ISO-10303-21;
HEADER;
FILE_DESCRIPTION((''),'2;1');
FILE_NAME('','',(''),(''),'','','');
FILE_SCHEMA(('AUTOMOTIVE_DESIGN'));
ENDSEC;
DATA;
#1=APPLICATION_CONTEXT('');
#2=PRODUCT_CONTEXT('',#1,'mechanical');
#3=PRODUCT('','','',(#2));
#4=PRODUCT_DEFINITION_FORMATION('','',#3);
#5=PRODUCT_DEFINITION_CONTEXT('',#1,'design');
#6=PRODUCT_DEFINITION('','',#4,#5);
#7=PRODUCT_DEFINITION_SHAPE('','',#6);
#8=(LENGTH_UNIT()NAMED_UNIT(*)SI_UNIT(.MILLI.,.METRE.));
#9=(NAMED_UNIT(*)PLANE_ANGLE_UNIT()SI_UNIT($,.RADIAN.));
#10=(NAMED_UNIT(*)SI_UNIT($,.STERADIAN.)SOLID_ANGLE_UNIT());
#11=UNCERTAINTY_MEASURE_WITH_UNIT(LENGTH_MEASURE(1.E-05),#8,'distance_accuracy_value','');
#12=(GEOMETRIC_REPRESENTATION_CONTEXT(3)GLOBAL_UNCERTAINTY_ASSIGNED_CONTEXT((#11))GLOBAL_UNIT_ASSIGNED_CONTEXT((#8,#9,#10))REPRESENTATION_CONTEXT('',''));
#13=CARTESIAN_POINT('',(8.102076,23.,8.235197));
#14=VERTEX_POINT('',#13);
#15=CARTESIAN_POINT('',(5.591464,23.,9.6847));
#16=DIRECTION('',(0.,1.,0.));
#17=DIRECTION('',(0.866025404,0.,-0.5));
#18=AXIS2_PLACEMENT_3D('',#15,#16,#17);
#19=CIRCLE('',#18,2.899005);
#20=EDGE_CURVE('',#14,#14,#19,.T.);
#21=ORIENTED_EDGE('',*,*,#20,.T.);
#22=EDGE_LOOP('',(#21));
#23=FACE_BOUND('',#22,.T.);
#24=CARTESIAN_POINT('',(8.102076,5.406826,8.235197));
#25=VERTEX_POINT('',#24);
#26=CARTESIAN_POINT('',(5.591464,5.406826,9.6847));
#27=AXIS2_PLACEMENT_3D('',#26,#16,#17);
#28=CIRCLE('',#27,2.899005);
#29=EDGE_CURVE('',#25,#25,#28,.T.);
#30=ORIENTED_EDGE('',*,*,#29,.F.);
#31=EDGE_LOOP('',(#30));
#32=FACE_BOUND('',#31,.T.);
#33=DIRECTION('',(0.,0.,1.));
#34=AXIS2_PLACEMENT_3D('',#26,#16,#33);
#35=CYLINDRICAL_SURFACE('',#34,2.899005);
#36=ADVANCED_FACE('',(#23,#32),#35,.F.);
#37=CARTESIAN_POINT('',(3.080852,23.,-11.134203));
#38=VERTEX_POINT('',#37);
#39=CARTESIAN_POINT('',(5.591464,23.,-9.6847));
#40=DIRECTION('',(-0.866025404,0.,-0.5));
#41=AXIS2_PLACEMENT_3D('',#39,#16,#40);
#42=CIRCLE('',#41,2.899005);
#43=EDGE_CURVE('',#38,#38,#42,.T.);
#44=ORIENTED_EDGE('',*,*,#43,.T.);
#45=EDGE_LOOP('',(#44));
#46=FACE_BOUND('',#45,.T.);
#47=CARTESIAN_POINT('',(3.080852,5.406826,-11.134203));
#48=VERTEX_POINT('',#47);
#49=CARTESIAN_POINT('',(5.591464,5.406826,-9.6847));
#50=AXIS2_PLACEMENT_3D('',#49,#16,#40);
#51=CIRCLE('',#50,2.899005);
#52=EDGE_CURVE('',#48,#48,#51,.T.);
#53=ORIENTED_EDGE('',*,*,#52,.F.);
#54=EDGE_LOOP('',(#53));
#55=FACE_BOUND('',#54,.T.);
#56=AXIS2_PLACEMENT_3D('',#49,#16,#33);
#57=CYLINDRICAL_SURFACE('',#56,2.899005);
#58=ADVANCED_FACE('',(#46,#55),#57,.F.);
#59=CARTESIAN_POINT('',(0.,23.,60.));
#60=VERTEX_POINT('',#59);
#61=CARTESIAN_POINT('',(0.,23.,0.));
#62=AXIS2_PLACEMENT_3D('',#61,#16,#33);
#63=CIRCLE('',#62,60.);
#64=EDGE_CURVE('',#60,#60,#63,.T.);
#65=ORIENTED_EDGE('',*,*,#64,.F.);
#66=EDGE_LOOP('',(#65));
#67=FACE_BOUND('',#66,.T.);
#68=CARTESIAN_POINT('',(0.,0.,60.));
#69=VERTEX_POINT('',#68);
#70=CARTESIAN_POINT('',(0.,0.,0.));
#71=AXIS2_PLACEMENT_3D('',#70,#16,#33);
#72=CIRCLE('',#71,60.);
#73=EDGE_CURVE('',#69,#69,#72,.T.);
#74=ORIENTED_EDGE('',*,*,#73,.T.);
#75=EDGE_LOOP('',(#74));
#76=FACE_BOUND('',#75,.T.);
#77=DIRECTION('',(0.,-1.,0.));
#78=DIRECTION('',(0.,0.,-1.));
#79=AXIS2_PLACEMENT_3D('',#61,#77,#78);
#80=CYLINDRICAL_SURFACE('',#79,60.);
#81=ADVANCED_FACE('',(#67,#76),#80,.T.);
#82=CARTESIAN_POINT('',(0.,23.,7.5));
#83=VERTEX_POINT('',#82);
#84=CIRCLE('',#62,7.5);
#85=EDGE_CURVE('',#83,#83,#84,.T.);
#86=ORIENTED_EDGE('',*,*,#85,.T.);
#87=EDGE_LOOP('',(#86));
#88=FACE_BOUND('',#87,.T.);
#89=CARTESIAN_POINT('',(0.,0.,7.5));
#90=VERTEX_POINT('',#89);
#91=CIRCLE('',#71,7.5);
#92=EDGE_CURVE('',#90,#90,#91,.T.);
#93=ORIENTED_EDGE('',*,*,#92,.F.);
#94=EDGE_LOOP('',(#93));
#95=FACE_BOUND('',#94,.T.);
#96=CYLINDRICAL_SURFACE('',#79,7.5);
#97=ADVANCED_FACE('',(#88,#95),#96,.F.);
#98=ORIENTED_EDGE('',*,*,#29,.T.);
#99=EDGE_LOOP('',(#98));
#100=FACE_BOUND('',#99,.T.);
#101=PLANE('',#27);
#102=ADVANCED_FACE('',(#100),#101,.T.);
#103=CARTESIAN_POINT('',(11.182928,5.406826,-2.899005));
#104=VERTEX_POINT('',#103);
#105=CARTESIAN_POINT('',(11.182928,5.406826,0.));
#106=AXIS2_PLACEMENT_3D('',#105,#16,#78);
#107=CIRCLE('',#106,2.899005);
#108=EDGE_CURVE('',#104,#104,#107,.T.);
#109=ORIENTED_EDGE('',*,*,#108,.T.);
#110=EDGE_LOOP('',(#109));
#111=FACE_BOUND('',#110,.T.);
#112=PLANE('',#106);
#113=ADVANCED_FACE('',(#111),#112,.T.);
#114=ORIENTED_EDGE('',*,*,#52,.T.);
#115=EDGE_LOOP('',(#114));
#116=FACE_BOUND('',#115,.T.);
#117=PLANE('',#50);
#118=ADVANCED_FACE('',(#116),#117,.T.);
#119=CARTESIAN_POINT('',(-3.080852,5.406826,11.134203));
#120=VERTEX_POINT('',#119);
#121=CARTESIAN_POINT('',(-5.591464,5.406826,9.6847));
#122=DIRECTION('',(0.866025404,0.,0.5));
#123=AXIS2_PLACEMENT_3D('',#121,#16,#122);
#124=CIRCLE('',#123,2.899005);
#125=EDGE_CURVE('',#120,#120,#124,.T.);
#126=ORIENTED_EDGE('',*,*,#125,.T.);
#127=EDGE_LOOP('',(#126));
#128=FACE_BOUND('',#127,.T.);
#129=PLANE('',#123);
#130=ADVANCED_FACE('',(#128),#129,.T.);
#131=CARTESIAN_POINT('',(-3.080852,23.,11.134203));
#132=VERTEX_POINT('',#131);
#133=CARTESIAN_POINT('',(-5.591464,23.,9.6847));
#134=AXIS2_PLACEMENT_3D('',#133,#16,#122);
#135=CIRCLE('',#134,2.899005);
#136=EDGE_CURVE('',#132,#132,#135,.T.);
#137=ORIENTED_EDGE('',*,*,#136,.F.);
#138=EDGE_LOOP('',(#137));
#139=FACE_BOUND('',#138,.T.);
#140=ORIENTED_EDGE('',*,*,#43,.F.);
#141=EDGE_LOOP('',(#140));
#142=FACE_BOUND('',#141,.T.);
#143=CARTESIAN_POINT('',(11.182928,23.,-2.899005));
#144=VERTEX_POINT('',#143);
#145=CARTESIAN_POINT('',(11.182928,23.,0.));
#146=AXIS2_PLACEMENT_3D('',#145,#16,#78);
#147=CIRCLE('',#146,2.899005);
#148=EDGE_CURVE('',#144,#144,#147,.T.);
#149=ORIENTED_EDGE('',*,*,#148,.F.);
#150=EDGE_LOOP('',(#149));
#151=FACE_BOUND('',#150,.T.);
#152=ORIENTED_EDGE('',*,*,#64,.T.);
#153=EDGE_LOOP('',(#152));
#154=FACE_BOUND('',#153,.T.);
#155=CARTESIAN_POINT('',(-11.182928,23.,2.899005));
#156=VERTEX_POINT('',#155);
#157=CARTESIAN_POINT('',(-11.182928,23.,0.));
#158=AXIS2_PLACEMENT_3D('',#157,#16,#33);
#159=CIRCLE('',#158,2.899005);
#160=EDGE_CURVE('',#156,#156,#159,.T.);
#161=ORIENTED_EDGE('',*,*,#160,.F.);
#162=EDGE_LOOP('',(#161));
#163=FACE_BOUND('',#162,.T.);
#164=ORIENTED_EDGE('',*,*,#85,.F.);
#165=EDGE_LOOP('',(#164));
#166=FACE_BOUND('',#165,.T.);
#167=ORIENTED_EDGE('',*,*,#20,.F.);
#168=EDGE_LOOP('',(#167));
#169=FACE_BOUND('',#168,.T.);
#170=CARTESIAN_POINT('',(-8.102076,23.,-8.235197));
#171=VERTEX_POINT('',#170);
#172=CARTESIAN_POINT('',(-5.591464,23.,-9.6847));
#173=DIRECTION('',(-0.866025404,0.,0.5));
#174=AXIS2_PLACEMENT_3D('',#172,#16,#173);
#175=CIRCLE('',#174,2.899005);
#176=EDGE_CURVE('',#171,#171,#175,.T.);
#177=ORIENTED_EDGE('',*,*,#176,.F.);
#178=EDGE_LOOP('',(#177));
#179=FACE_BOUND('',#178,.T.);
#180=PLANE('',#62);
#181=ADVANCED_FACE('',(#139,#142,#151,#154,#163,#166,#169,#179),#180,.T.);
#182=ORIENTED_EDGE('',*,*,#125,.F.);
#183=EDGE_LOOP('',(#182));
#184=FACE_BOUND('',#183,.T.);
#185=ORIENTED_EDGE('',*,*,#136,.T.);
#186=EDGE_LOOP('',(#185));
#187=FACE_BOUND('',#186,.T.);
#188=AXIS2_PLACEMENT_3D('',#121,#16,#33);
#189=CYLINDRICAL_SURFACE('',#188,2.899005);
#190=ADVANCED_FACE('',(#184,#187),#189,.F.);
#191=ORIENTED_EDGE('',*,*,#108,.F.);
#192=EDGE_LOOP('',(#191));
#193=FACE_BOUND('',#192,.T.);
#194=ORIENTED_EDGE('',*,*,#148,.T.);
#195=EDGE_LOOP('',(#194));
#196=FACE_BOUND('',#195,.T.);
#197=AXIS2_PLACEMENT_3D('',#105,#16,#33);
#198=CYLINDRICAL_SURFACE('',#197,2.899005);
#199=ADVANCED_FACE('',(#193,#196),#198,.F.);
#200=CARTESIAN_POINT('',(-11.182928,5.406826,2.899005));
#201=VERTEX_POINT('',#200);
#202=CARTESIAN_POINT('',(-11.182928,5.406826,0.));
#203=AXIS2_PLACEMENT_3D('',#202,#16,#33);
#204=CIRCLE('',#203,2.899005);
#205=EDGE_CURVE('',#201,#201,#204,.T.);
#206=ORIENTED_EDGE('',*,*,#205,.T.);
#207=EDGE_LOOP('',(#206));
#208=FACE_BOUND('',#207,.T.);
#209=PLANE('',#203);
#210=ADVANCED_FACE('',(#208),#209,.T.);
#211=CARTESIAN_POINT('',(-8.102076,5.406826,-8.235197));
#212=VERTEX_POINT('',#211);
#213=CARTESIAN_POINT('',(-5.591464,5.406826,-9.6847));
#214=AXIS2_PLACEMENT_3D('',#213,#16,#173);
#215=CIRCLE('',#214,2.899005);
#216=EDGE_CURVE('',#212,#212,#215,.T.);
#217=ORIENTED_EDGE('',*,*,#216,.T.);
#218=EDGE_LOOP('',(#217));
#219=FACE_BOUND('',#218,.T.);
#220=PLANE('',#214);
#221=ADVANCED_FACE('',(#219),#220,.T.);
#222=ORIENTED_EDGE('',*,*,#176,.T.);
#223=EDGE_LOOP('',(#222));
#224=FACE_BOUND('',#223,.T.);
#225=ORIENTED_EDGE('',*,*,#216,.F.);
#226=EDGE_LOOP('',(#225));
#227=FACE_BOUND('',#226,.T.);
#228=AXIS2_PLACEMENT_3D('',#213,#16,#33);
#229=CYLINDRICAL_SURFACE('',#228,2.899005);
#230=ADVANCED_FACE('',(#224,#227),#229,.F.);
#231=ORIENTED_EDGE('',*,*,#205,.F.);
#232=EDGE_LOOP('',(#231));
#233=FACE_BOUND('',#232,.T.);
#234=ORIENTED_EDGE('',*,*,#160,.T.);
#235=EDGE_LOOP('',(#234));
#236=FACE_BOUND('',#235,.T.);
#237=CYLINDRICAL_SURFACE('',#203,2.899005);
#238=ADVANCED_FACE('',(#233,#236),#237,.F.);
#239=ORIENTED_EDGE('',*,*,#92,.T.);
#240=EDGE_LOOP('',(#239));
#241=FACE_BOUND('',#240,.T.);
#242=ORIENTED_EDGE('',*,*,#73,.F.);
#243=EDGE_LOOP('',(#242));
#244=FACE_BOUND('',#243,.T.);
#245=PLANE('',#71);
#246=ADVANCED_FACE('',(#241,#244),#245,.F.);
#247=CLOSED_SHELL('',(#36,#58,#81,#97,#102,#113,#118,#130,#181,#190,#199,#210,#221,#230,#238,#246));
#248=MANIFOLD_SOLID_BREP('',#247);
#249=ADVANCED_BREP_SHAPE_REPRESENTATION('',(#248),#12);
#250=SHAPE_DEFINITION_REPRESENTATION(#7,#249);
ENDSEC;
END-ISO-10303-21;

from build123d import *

# Parameters (mm, degrees)
SKETCH1_R           = 60
BOSS_EXTRUDE1_DEPTH = 23
SKETCH2_R           = 7.5
CUT_EXTRUDE1_DEPTH  = 88.914731416
SKETCH3_R           = 2.89900535
CUT_EXTRUDE2_DEPTH  = 17.593173666
CIRPATTERN1_COUNT   = 6


with BuildPart() as part:
    # Sketch1 → Boss-Extrude1 (new body)
    with BuildSketch(Plane(origin=(0, 0, 0), x_dir=(1, 0, 0), z_dir=(0, 1, 0))):
        Circle(SKETCH1_R)
    extrude(amount=BOSS_EXTRUDE1_DEPTH)

    # Sketch2 → Cut-Extrude1 (cut, through all)
    with BuildSketch(Plane(origin=(0, 0, 0), x_dir=(1, 0, 0), z_dir=(0, 1, 0))):
        Circle(SKETCH2_R)
    extrude(amount=CUT_EXTRUDE1_DEPTH, mode=Mode.SUBTRACT)

    # Sketch3 → Cut-Extrude2 (cut)
    with BuildSketch(Plane(origin=(0, 23, 0), x_dir=(1, 0, 0), z_dir=(0, 1, 0))):
        with Locations((-11.182928406, 0)):
            Circle(SKETCH3_R)
    cut_extrude2 = extrude(amount=-CUT_EXTRUDE2_DEPTH, mode=Mode.SUBTRACT)

    # CirPattern1: Cut-Extrude2 ×6 about axis
    cirpattern1_axis = Axis((0, 0, 0), (0, 1, 0))
    for i in range(1, CIRPATTERN1_COUNT):
        add(cut_extrude2.rotate(cirpattern1_axis, i * 360 / CIRPATTERN1_COUNT), mode=Mode.SUBTRACT)


solid = part.part
